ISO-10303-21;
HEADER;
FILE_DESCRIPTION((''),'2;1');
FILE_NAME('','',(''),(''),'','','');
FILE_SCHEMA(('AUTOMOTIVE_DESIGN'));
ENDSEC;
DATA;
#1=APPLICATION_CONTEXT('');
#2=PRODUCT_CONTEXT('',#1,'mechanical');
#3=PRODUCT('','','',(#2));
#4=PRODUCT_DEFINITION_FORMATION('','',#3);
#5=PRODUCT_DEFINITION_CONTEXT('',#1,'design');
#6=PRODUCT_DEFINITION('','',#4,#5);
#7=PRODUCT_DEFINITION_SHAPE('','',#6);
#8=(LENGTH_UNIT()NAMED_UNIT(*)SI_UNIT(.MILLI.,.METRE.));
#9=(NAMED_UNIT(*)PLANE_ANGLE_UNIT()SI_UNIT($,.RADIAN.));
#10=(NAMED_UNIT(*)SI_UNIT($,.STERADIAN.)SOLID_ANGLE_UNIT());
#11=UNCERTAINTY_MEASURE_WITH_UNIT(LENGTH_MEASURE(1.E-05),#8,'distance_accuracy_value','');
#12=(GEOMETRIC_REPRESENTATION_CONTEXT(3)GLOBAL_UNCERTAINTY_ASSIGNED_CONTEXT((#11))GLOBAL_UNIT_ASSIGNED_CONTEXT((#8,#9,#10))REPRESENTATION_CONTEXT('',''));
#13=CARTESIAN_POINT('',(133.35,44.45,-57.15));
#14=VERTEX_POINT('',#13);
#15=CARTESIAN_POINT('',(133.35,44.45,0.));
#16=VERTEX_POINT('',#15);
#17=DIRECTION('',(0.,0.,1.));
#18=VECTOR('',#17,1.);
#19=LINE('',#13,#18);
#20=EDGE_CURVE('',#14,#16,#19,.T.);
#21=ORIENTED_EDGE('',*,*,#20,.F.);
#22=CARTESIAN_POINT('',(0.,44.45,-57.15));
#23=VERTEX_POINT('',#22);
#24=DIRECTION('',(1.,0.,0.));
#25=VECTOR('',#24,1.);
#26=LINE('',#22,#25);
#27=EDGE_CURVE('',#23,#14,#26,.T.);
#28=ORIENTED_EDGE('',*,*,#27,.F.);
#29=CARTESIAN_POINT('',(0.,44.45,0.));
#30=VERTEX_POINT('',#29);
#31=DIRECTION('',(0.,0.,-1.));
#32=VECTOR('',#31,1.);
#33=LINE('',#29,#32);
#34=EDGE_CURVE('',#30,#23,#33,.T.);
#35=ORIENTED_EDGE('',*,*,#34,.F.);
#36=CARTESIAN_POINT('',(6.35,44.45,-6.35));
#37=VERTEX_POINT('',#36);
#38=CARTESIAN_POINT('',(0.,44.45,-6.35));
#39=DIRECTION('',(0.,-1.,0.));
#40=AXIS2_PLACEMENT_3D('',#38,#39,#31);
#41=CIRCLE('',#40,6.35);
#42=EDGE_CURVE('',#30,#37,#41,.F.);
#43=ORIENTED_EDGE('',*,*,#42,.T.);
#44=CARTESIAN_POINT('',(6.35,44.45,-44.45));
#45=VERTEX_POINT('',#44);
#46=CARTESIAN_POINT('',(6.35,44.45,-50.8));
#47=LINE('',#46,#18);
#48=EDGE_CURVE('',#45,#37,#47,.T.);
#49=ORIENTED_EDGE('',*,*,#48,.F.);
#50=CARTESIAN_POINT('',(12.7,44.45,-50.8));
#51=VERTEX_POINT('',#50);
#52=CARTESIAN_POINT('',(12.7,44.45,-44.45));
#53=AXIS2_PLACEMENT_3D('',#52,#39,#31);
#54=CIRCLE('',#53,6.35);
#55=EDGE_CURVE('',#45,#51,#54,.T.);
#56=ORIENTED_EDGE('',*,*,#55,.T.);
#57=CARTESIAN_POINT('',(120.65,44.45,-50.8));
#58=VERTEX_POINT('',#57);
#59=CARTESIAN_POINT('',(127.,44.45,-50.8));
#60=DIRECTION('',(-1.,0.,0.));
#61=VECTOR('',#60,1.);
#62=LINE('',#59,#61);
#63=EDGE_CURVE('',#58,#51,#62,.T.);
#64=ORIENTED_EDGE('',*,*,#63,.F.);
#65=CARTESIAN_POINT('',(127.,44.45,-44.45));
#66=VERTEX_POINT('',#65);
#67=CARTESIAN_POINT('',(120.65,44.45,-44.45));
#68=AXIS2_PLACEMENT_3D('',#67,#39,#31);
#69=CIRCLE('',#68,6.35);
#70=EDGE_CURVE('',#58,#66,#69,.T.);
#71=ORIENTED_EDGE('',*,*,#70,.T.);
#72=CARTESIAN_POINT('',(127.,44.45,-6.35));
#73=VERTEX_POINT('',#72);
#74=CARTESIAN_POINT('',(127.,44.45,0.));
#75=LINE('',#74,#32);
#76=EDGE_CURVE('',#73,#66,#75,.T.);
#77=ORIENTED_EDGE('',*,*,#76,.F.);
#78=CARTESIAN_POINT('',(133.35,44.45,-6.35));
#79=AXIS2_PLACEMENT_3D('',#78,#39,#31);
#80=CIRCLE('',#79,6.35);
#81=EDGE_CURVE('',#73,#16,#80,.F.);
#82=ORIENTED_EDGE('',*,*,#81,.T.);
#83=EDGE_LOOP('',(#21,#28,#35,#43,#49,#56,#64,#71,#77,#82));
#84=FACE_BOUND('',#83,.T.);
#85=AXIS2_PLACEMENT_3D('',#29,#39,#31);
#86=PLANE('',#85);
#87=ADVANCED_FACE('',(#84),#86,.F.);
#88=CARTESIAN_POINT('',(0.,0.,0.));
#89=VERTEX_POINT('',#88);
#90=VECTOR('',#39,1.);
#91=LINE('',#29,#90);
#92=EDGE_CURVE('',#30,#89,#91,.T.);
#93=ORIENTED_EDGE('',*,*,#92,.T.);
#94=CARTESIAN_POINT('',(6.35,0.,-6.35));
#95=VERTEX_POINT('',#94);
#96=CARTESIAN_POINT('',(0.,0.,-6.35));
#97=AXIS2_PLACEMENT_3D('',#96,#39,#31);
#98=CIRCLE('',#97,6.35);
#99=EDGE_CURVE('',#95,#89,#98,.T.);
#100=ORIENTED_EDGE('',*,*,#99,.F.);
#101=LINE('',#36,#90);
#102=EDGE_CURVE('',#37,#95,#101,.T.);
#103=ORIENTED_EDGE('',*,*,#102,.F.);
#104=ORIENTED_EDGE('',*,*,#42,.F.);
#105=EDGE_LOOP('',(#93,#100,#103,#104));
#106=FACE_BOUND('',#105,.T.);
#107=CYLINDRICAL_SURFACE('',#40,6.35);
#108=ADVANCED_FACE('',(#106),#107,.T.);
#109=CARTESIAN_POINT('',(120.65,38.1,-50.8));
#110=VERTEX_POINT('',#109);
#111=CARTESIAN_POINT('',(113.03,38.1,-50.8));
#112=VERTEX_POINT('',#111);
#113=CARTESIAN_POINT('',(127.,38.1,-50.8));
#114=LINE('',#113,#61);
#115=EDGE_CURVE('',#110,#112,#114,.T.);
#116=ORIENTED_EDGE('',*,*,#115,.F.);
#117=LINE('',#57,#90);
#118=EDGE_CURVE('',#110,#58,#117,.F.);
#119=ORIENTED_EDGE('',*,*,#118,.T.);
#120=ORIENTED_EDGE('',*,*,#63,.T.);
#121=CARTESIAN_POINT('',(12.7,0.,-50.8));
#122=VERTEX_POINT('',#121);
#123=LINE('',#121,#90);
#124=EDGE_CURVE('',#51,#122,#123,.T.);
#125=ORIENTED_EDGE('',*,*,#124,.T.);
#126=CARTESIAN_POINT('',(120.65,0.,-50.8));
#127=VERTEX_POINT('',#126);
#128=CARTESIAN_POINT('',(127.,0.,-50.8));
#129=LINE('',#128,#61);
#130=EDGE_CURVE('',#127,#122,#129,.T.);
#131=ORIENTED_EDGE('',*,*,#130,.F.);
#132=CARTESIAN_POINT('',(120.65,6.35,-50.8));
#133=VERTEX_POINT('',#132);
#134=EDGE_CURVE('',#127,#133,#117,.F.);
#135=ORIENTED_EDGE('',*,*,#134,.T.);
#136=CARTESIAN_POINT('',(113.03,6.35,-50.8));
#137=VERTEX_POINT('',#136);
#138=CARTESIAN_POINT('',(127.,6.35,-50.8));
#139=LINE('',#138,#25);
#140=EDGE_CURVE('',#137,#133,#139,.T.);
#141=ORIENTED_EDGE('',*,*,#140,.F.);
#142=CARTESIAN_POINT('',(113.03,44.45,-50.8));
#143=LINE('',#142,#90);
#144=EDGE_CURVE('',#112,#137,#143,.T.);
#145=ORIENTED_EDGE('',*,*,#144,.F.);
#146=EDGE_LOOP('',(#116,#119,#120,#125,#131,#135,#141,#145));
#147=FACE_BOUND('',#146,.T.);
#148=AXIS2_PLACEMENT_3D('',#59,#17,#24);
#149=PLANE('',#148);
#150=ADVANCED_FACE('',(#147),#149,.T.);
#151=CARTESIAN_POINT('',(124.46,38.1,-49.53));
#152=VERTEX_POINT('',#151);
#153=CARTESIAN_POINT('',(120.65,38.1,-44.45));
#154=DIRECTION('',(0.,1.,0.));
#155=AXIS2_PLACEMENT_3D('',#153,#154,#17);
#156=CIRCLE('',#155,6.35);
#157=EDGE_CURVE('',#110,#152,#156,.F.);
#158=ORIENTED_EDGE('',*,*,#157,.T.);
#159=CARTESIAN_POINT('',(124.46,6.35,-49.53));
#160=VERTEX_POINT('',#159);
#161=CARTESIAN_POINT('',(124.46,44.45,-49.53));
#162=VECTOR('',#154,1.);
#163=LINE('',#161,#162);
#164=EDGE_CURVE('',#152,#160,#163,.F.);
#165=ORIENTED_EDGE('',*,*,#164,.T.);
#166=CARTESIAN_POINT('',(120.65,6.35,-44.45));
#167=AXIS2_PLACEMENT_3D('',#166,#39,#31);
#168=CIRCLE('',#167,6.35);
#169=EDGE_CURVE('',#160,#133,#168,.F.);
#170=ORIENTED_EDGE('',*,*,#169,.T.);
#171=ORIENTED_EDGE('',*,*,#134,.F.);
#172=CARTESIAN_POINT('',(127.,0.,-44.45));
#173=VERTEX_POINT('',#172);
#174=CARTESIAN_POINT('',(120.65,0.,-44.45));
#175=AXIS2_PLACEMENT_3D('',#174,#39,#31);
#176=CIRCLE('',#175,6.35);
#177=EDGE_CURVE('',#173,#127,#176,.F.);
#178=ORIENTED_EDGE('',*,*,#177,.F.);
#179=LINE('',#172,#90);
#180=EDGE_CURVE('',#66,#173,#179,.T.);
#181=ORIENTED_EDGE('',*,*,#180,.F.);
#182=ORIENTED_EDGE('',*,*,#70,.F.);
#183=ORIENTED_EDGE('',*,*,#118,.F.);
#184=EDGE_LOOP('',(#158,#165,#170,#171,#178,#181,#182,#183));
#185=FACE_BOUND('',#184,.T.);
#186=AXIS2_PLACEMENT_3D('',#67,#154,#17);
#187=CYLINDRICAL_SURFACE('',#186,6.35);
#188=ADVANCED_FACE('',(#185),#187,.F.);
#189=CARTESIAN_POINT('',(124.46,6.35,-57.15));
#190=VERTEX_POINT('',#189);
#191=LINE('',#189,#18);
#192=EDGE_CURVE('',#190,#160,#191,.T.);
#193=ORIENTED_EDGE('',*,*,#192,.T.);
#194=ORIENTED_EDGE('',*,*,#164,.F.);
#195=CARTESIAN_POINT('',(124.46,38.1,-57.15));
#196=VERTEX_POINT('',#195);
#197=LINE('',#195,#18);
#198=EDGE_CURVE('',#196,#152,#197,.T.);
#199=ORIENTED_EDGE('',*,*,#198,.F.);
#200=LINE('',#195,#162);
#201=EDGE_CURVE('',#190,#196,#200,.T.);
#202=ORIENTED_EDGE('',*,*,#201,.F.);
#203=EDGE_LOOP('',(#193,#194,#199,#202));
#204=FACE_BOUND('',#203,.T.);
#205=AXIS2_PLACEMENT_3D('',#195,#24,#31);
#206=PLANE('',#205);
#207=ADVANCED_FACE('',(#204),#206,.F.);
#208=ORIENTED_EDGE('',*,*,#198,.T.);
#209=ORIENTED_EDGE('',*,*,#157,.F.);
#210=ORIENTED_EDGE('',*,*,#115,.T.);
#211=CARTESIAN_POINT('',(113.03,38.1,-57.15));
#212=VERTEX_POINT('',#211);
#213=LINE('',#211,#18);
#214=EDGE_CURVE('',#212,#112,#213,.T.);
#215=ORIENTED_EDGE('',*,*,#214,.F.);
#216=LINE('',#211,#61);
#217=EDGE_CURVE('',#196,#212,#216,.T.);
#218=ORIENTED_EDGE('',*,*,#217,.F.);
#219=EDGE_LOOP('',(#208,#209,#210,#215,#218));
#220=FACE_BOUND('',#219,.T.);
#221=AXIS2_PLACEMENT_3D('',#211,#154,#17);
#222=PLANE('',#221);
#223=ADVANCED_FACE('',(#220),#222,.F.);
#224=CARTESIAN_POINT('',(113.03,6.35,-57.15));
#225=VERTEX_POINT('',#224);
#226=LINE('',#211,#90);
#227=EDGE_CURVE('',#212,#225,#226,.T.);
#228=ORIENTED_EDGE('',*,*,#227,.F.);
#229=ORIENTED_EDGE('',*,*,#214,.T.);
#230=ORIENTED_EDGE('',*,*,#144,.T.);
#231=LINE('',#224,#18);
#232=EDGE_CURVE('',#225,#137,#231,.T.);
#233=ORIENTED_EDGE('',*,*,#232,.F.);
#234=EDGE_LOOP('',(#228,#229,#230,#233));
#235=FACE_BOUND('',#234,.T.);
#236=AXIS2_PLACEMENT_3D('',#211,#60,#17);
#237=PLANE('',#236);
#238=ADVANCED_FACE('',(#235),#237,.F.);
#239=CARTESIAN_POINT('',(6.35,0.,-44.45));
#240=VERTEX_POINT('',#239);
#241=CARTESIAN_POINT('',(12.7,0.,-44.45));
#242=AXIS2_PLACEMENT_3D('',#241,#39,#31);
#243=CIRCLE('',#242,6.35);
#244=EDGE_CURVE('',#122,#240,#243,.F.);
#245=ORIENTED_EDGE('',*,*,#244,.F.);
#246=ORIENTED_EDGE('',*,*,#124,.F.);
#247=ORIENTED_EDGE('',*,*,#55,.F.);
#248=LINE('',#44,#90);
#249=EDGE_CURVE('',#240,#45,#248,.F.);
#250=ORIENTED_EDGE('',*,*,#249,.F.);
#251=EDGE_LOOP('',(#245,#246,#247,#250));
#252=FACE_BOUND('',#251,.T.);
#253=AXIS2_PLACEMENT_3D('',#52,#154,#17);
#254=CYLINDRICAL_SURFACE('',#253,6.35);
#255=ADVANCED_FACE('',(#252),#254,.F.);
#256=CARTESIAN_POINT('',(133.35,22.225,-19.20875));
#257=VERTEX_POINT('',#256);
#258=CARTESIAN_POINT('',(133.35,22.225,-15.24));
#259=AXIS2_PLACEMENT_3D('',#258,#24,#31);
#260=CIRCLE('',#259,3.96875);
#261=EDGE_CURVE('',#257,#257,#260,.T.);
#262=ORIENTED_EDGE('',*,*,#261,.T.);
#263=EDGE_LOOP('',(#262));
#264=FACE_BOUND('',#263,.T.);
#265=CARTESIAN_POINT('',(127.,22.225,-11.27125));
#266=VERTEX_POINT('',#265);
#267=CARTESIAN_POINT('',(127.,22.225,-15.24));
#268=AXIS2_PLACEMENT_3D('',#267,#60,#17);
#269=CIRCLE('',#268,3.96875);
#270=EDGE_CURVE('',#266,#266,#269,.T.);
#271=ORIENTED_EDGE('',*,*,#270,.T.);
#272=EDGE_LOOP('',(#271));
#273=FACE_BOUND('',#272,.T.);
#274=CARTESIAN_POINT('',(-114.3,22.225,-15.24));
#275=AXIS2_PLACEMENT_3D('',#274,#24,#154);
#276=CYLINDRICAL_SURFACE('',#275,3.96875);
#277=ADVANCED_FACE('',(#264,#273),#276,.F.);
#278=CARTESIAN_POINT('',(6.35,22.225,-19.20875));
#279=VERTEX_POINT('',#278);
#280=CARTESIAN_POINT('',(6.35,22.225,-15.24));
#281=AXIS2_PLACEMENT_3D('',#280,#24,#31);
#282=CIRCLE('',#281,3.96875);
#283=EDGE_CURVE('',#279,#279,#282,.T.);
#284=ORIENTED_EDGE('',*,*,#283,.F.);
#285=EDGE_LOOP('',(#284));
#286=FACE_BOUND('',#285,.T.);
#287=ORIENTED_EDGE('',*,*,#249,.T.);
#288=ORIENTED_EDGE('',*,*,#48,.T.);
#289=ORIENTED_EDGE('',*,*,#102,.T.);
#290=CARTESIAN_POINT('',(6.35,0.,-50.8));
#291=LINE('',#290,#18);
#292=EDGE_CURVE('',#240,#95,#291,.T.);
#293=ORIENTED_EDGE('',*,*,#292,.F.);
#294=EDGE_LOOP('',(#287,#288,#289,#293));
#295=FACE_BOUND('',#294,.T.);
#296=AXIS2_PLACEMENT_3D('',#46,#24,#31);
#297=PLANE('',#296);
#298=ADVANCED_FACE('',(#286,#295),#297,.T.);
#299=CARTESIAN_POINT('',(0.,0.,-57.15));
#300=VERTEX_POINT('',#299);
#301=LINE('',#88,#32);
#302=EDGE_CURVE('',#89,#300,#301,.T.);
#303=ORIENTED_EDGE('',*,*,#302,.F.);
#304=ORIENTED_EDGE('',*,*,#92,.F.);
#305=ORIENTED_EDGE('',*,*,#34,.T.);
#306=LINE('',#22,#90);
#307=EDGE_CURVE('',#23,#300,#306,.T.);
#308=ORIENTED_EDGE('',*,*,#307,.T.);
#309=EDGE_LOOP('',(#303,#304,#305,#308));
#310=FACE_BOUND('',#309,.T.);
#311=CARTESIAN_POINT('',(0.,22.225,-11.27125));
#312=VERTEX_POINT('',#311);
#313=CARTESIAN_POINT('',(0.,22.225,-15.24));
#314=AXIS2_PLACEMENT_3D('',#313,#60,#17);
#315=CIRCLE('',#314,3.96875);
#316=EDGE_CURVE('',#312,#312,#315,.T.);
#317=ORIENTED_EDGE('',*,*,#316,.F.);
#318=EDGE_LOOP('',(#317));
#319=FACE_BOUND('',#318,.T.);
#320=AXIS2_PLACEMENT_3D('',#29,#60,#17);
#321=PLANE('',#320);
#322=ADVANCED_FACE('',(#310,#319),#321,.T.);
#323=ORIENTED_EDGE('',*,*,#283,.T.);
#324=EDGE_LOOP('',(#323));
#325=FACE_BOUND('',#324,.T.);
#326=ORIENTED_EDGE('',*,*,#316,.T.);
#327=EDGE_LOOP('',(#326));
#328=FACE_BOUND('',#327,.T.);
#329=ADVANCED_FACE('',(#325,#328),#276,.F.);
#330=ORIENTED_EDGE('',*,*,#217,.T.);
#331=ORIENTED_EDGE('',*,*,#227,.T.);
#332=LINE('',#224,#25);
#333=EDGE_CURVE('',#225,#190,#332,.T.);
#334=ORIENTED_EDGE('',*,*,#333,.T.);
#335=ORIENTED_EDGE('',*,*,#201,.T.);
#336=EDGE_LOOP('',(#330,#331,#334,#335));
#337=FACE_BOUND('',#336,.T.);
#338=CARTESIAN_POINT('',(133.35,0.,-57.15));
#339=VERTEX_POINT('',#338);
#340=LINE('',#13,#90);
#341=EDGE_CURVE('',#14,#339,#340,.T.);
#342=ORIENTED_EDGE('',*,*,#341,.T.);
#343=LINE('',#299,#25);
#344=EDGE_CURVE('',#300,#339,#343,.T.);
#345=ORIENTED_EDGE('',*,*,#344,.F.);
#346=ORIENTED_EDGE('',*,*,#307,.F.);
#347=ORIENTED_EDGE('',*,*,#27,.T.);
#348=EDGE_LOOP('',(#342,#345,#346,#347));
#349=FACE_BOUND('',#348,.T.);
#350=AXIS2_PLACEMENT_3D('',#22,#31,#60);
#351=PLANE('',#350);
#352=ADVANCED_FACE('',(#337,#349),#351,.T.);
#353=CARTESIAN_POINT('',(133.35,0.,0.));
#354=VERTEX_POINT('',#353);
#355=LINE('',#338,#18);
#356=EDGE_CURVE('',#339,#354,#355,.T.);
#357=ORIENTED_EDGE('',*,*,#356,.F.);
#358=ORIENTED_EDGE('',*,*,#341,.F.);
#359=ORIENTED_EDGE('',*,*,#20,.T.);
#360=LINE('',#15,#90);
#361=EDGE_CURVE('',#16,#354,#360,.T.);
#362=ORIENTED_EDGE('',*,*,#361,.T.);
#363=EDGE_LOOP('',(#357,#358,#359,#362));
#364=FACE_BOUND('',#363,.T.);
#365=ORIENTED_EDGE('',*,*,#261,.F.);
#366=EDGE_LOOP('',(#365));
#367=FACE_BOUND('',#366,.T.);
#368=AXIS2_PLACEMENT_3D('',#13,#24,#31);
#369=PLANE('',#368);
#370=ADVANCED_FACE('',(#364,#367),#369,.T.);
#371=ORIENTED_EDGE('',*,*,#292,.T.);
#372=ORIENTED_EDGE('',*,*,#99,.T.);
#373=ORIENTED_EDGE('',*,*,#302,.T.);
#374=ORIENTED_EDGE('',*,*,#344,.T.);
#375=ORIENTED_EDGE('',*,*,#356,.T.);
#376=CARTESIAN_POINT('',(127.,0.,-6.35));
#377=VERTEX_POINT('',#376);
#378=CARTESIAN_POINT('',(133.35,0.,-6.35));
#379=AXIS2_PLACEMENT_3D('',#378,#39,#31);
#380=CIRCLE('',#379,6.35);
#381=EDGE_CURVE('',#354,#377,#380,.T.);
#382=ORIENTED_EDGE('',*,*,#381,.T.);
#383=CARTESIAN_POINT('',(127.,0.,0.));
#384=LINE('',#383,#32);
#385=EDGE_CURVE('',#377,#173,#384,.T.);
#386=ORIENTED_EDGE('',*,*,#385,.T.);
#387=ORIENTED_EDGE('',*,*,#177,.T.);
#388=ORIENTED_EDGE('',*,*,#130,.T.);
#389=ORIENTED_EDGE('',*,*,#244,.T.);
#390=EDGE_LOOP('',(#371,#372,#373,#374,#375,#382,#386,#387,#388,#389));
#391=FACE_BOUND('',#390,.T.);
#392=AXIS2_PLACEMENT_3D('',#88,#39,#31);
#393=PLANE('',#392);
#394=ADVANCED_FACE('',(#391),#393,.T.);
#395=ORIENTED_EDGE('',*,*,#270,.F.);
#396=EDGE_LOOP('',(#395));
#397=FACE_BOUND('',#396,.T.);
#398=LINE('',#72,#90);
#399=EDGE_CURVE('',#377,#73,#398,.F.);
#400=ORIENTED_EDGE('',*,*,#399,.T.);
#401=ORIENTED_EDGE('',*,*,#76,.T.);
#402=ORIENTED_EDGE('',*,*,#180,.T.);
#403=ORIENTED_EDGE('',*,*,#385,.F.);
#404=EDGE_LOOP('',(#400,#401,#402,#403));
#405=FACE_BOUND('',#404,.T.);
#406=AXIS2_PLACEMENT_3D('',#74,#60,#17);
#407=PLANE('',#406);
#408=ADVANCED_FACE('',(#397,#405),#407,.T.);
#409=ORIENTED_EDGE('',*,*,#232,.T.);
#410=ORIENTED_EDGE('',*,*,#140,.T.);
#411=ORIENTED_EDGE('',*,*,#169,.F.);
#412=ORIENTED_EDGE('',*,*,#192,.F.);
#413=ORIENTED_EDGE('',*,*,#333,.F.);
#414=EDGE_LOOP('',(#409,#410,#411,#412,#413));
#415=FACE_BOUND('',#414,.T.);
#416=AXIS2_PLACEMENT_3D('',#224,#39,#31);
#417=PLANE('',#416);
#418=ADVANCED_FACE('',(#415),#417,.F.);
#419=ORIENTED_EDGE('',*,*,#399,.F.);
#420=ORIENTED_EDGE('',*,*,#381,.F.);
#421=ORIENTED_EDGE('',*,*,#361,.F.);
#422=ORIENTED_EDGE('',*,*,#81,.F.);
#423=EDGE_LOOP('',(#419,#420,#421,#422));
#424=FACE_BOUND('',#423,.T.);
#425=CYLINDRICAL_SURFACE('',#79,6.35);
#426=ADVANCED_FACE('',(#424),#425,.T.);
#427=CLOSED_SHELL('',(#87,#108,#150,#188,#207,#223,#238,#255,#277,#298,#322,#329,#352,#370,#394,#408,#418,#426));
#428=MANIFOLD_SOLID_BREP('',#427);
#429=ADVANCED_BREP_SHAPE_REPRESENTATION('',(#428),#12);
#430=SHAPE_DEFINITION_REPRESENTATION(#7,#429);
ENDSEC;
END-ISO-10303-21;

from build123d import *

# Parameters (mm, degrees)
BOSS_EXTRUDE1_DEPTH     = 44.45
FILLET1_R               = 6.35
FILLET2_R               = 6.35
SKETCH4_R               = 3.96875
CUT_EXTRUDE2_DEPTH      = 254
CUT_EXTRUDE4_DEPTH      = 150.461249158
CUT_EXTRUDE4_DEPTH_BACK = 150.461249158
SKETCH5_W               = 11.43
SKETCH5_H               = 31.75


with BuildPart() as part:
    # Sketch1 → Boss-Extrude1 (new body)
    with BuildSketch(Plane(origin=(0, 0, 0), x_dir=(1, 0, 0), z_dir=(0, 1, 0))):
        Polygon((0, 0), (0, 57.15), (133.35, 57.15), (133.35, 0), (127, 0), (127, 50.8), (6.35, 50.8), (6.35, 0), align=None)
    extrude(amount=BOSS_EXTRUDE1_DEPTH)

    # Fillet1
    fillet1_edges = [part.edges().sort_by_distance(p)[0] for p in [
        (6.35, 22.225, -50.8),
        (127, 22.225, -50.8),
    ]]
    fillet(fillet1_edges, radius=FILLET1_R)

    # Fillet2
    fillet2_edges = [part.edges().sort_by_distance(p)[0] for p in [
        (127, 22.225, 0),
        (6.35, 22.225, 0),
    ]]
    fillet(fillet2_edges, radius=FILLET2_R - 0.0001)  # a hair under: the kernel refuses the full size

    # Sketch4 → Cut-Extrude2 (cut)
    with BuildSketch(Plane(origin=(139.7, 1.415162488, -69.948790088), x_dir=(0, 0, -1), z_dir=(1, 0, 0))):
        with Locations((-54.708790088, 20.809837512)):
            Circle(SKETCH4_R)
    extrude(amount=-CUT_EXTRUDE2_DEPTH, mode=Mode.SUBTRACT)

    # Sketch5 → Cut-Extrude4 (cut, two sides: drawn at the far end of the back side and taken through both)
    with BuildSketch(Plane.XY.offset(-50.8).offset(-CUT_EXTRUDE4_DEPTH_BACK)):
        with Locations((118.745, 22.225)):
            Rectangle(SKETCH5_W, SKETCH5_H)
    extrude(amount=CUT_EXTRUDE4_DEPTH + CUT_EXTRUDE4_DEPTH_BACK, mode=Mode.SUBTRACT)


solid = part.part
